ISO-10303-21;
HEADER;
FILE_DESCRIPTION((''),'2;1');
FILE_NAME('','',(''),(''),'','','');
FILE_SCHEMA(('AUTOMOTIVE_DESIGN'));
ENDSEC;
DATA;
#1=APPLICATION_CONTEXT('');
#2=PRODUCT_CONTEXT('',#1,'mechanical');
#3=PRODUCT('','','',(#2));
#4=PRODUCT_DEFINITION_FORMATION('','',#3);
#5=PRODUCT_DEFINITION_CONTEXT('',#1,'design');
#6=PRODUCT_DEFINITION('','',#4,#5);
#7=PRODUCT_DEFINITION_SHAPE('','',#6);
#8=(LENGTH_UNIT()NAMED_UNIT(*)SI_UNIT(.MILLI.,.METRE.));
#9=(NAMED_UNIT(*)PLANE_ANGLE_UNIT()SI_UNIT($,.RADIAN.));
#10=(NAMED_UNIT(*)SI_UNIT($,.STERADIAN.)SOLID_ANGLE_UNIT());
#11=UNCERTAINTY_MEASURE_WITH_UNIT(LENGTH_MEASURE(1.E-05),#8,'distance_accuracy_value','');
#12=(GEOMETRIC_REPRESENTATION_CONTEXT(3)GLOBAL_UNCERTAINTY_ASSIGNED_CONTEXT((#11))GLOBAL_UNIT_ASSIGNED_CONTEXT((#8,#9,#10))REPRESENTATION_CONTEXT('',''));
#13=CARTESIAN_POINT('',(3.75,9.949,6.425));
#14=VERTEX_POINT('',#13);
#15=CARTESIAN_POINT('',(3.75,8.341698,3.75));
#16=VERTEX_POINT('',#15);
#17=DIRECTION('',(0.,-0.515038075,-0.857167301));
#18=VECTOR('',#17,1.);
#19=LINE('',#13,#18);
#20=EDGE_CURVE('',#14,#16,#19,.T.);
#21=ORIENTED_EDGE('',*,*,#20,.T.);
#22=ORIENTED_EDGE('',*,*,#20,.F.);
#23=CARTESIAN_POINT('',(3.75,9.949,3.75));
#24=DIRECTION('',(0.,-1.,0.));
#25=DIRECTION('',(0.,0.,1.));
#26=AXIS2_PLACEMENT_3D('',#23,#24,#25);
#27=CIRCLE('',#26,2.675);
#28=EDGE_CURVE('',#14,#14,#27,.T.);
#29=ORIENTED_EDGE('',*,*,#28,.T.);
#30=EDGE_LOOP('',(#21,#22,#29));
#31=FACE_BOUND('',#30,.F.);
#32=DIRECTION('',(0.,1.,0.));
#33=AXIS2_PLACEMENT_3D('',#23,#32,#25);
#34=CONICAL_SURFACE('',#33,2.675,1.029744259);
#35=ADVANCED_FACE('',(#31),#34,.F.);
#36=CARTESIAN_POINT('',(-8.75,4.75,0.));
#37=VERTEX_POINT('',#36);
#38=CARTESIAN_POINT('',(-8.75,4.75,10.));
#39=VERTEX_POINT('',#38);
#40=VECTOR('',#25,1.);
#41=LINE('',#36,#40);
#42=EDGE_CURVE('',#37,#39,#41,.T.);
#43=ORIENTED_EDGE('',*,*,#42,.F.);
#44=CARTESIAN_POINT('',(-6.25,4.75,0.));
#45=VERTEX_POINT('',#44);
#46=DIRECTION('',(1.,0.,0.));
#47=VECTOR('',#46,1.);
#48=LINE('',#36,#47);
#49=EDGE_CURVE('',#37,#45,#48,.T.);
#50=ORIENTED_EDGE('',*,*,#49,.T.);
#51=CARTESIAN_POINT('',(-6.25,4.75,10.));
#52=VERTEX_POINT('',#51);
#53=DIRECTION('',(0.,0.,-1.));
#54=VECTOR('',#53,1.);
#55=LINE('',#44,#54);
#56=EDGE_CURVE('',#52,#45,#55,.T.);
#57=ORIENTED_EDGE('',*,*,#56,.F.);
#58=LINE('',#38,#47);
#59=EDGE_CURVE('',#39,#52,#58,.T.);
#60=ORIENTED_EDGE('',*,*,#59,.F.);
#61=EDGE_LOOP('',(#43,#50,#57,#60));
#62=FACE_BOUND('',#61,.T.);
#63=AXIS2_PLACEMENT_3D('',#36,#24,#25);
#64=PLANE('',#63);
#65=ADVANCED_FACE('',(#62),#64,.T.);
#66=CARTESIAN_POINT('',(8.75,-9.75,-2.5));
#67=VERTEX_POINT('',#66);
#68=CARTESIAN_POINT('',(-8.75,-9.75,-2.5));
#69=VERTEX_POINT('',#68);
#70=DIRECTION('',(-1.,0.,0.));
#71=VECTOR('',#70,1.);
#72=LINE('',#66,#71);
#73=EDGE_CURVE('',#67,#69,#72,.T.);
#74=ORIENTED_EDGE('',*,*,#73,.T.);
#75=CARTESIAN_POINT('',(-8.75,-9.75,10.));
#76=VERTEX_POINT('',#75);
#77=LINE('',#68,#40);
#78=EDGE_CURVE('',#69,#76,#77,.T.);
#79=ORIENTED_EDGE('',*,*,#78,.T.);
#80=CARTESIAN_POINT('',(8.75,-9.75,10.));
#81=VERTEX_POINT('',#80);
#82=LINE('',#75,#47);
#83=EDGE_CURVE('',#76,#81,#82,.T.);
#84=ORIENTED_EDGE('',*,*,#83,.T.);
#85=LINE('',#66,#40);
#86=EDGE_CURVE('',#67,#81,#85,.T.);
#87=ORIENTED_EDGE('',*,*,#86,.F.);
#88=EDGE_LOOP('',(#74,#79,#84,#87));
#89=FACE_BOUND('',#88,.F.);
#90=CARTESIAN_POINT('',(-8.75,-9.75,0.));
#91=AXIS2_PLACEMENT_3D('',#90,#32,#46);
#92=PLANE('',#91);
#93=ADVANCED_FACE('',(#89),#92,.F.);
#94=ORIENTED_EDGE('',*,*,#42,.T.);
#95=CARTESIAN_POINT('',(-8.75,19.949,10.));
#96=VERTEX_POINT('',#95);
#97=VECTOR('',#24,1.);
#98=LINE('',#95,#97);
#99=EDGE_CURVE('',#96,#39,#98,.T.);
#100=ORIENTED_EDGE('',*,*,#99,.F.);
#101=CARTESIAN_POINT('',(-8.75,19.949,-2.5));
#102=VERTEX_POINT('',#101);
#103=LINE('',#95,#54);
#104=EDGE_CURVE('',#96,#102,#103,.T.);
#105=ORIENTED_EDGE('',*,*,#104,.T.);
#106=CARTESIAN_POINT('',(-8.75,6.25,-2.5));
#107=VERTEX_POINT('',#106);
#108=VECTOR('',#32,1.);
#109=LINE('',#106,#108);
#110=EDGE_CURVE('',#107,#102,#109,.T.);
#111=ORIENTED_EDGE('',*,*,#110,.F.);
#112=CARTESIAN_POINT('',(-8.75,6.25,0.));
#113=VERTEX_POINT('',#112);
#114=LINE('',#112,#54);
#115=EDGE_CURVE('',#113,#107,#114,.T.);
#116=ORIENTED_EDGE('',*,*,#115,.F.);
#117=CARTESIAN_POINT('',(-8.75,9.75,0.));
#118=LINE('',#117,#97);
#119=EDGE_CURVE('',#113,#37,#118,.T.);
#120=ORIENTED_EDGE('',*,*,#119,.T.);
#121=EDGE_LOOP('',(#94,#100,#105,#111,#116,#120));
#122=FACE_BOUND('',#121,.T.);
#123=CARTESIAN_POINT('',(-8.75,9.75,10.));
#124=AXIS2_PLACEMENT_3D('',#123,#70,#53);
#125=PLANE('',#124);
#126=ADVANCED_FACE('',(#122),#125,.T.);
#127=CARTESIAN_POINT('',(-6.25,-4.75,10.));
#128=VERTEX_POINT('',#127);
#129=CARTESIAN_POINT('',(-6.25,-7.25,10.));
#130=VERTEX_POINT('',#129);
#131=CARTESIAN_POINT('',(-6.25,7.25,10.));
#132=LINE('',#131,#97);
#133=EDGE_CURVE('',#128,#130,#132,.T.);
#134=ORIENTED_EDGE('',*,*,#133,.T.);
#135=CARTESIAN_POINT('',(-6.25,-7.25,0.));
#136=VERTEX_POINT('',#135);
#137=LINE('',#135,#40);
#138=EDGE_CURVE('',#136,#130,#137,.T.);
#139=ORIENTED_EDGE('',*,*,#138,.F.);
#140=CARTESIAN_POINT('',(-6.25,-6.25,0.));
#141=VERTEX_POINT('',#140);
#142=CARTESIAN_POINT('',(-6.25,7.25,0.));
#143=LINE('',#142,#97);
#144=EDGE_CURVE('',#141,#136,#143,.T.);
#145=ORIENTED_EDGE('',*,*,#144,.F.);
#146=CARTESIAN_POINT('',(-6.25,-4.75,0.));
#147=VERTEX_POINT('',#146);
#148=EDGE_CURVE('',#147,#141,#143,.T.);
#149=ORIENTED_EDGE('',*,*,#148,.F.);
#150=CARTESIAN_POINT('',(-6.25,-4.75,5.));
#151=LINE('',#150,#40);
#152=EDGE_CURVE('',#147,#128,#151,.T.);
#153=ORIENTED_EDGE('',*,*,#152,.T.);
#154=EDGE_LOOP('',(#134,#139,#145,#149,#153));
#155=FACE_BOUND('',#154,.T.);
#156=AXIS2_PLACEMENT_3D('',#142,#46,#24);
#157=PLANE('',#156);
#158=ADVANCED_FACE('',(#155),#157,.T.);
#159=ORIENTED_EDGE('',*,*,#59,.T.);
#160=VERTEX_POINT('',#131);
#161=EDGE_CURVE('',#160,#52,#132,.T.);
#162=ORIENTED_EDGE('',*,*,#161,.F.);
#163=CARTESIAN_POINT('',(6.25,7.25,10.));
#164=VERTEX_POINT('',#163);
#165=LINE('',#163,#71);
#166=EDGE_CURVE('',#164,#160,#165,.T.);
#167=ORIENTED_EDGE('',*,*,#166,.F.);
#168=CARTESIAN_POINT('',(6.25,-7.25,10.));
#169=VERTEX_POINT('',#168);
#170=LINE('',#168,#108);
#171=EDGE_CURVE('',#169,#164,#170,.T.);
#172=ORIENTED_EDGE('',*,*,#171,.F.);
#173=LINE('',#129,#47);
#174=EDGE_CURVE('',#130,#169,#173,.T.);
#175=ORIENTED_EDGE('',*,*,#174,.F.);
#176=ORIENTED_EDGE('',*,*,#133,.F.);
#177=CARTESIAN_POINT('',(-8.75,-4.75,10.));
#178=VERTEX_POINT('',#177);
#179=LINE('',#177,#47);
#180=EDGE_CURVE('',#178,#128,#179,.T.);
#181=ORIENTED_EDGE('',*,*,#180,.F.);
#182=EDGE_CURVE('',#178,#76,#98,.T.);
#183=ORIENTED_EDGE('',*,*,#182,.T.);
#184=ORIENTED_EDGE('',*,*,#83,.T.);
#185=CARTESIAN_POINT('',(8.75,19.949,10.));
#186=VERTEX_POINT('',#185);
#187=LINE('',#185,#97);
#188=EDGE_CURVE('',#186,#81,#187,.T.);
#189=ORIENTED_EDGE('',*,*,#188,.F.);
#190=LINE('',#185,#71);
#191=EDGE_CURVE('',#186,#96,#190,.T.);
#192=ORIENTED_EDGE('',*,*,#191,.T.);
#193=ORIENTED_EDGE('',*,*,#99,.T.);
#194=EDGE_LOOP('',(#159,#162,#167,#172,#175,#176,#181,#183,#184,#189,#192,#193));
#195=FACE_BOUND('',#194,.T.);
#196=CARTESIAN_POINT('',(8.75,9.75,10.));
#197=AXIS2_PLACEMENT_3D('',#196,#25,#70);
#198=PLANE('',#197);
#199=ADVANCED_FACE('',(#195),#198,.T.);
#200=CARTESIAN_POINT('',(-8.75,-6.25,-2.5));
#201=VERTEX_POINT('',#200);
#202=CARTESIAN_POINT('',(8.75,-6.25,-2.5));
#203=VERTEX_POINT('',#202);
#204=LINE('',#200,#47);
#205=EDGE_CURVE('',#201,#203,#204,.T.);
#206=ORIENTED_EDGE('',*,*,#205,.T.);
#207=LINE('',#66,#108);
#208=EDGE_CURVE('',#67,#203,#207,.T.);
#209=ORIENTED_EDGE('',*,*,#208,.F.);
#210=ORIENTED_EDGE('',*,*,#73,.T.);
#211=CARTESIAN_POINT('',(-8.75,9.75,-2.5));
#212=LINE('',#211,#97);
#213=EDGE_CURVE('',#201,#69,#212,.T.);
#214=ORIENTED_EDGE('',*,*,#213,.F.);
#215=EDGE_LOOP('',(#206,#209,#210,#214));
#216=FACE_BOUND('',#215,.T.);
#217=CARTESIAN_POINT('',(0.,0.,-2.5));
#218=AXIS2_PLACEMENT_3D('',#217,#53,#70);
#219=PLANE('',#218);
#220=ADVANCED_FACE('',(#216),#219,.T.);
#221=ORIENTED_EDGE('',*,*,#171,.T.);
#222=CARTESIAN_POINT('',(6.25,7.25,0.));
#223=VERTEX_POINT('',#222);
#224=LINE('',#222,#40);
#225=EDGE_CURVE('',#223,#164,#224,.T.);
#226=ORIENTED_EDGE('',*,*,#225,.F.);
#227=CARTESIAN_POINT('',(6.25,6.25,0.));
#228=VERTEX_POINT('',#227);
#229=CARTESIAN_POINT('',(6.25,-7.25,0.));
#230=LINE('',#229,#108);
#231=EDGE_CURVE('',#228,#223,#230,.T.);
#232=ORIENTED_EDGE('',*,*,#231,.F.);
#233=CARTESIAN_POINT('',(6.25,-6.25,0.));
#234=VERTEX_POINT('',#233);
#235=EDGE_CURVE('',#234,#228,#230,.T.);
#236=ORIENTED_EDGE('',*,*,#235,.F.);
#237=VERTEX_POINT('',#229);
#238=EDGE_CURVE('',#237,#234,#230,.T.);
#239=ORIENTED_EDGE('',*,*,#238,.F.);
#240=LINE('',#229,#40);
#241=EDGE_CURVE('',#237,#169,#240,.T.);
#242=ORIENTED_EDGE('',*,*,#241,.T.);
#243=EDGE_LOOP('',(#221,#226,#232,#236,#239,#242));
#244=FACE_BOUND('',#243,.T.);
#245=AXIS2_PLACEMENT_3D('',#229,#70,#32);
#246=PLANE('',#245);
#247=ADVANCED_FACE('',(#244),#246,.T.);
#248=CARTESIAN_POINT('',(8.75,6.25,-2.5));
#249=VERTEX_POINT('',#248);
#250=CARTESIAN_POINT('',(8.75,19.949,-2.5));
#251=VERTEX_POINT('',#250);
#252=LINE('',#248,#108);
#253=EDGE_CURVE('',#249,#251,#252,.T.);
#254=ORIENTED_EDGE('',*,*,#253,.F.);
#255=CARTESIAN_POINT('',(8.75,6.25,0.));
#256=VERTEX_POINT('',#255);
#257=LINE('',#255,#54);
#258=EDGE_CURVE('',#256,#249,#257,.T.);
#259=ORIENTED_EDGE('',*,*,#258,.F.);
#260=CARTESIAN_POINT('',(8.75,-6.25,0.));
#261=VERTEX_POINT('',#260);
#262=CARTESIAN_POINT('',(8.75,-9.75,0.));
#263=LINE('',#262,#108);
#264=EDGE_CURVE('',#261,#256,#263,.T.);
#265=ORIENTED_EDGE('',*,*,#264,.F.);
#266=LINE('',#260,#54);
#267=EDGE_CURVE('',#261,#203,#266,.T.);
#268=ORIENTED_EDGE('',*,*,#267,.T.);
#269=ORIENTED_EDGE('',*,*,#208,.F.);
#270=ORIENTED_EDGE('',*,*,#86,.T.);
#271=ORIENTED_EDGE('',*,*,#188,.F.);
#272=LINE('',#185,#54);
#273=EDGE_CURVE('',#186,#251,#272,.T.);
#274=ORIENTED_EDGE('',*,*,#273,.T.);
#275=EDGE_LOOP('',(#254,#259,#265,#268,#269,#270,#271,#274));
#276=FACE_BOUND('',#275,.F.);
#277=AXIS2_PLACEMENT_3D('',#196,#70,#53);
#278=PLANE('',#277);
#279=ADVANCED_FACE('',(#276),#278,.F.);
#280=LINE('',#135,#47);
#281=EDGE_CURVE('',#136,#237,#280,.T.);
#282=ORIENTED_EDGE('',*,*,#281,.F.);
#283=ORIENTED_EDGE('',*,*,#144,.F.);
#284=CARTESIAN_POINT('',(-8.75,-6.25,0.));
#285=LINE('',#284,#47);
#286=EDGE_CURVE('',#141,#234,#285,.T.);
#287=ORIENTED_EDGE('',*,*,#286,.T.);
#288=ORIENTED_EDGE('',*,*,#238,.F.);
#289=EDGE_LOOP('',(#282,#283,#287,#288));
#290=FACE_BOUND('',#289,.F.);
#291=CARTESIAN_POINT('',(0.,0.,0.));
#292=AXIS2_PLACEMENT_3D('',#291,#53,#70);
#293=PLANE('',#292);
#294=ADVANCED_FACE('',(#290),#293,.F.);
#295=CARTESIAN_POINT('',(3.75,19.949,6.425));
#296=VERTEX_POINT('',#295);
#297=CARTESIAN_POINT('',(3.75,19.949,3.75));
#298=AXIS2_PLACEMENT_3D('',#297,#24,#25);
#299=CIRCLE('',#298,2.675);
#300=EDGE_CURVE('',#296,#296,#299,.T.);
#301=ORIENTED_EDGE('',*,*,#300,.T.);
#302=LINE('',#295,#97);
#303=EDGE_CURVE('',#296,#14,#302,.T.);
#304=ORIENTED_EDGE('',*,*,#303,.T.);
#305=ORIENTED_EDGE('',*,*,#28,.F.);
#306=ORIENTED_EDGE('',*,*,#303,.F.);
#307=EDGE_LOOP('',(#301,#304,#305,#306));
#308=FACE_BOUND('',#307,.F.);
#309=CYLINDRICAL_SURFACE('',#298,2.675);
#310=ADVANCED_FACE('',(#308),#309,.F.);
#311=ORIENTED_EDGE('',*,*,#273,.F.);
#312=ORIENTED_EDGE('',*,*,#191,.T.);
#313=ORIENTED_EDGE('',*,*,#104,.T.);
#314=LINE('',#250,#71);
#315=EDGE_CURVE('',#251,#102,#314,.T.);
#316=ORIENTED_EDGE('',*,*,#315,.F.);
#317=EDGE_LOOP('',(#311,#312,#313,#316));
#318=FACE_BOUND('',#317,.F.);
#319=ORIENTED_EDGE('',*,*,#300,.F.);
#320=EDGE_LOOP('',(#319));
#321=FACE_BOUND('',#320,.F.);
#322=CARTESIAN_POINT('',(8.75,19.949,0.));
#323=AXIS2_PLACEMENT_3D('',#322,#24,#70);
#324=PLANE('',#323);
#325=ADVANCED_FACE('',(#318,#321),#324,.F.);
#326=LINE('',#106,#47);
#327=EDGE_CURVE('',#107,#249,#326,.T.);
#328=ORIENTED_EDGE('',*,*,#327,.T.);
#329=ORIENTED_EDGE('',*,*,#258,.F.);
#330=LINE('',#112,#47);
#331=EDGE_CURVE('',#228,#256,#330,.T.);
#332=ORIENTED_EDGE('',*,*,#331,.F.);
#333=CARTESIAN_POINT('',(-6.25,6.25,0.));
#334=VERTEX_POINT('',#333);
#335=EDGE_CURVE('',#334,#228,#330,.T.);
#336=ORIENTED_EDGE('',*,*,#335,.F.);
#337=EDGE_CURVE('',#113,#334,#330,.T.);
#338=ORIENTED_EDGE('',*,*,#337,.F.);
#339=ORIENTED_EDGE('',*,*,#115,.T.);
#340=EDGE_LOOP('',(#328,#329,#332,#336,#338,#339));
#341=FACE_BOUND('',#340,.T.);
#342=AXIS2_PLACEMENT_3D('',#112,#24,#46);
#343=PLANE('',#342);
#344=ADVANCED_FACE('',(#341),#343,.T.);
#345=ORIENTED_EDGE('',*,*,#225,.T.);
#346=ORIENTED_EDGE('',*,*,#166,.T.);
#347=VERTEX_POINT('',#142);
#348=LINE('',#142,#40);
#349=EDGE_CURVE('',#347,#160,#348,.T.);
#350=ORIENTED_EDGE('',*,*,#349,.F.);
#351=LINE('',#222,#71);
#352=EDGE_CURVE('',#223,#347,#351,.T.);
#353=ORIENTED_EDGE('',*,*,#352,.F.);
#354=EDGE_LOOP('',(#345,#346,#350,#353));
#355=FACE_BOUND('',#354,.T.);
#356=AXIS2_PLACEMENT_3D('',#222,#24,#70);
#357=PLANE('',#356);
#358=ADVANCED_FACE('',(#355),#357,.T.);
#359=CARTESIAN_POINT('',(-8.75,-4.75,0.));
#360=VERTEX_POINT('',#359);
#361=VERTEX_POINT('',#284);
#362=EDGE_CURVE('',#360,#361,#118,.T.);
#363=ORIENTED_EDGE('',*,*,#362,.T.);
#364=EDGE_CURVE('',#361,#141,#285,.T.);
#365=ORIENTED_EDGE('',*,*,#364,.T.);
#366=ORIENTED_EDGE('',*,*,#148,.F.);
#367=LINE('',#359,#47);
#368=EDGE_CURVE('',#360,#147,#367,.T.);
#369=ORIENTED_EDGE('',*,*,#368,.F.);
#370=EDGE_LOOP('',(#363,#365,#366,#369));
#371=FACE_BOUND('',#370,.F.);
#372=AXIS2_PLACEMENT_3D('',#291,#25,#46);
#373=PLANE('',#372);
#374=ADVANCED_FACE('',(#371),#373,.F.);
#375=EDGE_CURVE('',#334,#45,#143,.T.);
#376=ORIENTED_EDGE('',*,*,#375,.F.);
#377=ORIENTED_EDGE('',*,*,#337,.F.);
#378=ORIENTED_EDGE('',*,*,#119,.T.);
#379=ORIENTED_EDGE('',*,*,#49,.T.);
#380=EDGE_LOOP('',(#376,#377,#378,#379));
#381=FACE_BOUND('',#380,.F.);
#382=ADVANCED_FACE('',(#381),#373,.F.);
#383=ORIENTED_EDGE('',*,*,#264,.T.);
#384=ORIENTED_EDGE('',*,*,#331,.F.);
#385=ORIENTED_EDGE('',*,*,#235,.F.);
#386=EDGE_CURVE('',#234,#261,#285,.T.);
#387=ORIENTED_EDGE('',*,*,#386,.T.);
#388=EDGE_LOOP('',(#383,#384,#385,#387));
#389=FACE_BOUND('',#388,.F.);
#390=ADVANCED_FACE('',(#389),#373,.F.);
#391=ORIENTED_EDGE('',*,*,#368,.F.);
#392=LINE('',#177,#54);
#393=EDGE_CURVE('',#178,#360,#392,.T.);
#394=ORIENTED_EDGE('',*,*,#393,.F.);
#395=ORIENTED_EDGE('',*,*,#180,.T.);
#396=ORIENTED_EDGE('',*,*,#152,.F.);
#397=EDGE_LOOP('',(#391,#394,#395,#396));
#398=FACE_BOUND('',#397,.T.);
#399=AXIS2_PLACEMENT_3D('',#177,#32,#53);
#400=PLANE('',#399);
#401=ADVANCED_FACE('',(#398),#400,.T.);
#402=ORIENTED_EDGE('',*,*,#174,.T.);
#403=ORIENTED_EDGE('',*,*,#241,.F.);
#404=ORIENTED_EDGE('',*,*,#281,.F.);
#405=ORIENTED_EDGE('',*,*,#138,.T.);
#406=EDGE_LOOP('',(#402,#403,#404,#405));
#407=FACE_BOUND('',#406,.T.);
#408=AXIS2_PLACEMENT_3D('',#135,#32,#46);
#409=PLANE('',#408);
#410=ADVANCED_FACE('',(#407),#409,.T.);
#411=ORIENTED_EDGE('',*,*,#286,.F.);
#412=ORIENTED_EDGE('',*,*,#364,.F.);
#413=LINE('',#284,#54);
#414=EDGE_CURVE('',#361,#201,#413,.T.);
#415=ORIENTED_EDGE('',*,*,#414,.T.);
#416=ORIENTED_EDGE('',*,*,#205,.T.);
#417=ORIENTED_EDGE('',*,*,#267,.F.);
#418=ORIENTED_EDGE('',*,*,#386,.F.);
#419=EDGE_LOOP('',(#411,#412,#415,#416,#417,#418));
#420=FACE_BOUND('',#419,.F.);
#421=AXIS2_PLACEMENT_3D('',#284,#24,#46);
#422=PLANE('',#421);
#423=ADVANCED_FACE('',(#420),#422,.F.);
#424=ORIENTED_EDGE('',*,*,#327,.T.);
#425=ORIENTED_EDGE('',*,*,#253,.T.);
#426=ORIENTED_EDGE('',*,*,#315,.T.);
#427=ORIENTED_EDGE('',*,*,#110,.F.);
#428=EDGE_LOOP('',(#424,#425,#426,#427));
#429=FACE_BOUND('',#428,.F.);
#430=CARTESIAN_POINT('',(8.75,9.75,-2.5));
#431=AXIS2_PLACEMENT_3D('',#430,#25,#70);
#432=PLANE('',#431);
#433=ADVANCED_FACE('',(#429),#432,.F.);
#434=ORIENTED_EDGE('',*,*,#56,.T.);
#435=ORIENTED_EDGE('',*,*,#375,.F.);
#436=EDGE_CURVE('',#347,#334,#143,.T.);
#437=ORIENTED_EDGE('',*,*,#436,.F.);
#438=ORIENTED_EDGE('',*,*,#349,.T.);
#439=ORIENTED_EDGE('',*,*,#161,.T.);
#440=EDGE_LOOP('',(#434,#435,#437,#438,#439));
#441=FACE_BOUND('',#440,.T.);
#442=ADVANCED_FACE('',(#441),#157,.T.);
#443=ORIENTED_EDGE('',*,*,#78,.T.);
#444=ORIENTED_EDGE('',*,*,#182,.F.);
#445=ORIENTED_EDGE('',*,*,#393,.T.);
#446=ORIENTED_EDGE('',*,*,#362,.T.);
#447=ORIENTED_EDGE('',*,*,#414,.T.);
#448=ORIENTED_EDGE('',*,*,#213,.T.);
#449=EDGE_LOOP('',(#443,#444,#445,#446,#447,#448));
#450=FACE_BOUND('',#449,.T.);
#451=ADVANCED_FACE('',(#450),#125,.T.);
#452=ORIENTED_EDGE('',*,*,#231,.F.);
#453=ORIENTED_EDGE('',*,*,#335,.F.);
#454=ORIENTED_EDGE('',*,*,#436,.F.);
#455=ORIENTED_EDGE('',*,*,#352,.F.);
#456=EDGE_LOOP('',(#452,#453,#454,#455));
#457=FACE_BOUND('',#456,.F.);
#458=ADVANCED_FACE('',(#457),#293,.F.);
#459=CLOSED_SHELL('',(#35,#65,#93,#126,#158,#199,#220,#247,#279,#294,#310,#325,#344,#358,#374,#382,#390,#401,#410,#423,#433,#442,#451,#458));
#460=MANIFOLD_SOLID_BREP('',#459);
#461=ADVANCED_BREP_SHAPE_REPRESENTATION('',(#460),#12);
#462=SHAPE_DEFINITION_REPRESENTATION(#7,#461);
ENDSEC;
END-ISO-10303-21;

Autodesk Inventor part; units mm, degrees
ref_plane "YZ Plane" through (0, 0, 0) normal (1, 0, 0) x (0, 1, 0)
ref_plane "XZ Plane" through (0, 0, 0) normal (0, 1, 0) x (-1, 0, 0)
ref_plane "XY Plane" through (0, 0, 0) normal (0, 0, 1) x (1, 0, 0)
sketch "Sketch1" plane through (0, 0, 0) normal (0, 0, 1) x (1, 0, 0)
  line L0 (-6.25, -7.25) -> (6.25, -7.25)
  line L1 (6.25, -7.25) -> (6.25, 7.25)
  line L2 (6.25, 7.25) -> (-6.25, 7.25)
  line L3 (-6.25, 7.25) -> (-6.25, -7.25)
  line L4 (-6.25, -7.25) -> (6.25, 7.25) construction
  line L5 (6.25, -7.25) -> (-6.25, 7.25) construction
  line L6 (-8.75, -9.75) -> (8.75, -9.75)
  line L7 (8.75, -9.75) -> (8.75, 9.75)
  line L8 (8.75, 9.75) -> (-8.75, 9.75)
  line L9 (-8.75, 9.75) -> (-8.75, -9.75)
  line L10 (-8.75, -9.75) -> (8.75, 9.75) construction
  line L11 (8.75, -9.75) -> (-8.75, 9.75) construction
  point P0 (0, 0)
  dimension "d0" = 12.5
  dimension "d1" = 14.5
  dimension "d2" = 17.5
  dimension "d3" = 19.5
extrude "Extrusion1" add sketch "Sketch1" along normal blind 10
sketch "Sketch2" plane through (0, 0, 0) normal (0, 0, -1) x (-1, 0, 0)
  line L0 (8.75, 9.75) -> (8.75, -9.75) projected
  line L1 (-8.75, 9.75) -> (8.75, 9.75)
  line L2 (8.75, 9.75) -> (8.75, 6.25)
  line L3 (8.75, 6.25) -> (-8.75, 6.25)
  line L4 (-8.75, 6.25) -> (-8.75, 9.75)
  line L5 (6.25, 7.25) -> (-6.25, 7.25) projected
  line L6 (-8.75, -9.75) -> (-8.75, 9.75) projected
  line L7 (-8.75, -9.75) -> (8.75, -9.75)
  line L8 (8.75, -9.75) -> (8.75, -6.25)
  line L9 (8.75, -6.25) -> (-8.75, -6.25)
  line L10 (-8.75, -6.25) -> (-8.75, -9.75)
  line L11 (-6.25, -7.25) -> (6.25, -7.25) projected
  point P0 (0, 0)
  point P1 (-8.75, -6.25)
  dimension "d6" = 1
  dimension "d7" = 1
extrude "Extrusion2" add sketch "Sketch2" along normal blind 2.5 contours L0 L3 L4 L1 | L0 L7 L6 L9
thicken "Thicken1" operation add thickness 10.199 both sides no extend neighbours no toward (0, 1, 0) faces at (-2.9167, 9.75, 5.8333)
sketch "Sketch3" plane through (-8.75, 19.949, 10) normal (0, 1, 0) x (1, 0, 0)
  line L0 (0, 12.5) -> (0, 0) projected
  line L1 (17.5, 12.5) -> (17.5, 0) projected
  point P0 (8.75, 10)
  point P1 (12.5, 6.25)
  point P2 (0, 6.25)
  dimension "d19" = 5
hole "Hole1" at (3.75, 19.949, 3.75) direction (0, -1, 0) diameter 5.35 depth 10 tip angle 118
sketch "Sketch4" plane through (-8.75, -6.25, 0) normal (-1, 0, 0) x (0, 0, 1)
  line L0 (10, -3.5) -> (10, 26.199) projected
  line L1 (0, 12.5) -> (0, 0) projected
  line L2 (10, 1.5) -> (0, 1.5)
  line L3 (0, 1.5) -> (0, 11)
  line L4 (0, 11) -> (10, 11)
  line L5 (10, 11) -> (10, 1.5)
  line L6 (-2.5, -3.5) -> (10, -3.5) projected
  point P0 (0, 6.25)
  point P1 (0, 1.5)
  dimension "d20" = 5
  dimension "d21" = 9.5
extrude "Extrusion3" cut sketch "Sketch4" against normal blind 5
properties part number "Adafruit_1528_4663-ND_House_02"
